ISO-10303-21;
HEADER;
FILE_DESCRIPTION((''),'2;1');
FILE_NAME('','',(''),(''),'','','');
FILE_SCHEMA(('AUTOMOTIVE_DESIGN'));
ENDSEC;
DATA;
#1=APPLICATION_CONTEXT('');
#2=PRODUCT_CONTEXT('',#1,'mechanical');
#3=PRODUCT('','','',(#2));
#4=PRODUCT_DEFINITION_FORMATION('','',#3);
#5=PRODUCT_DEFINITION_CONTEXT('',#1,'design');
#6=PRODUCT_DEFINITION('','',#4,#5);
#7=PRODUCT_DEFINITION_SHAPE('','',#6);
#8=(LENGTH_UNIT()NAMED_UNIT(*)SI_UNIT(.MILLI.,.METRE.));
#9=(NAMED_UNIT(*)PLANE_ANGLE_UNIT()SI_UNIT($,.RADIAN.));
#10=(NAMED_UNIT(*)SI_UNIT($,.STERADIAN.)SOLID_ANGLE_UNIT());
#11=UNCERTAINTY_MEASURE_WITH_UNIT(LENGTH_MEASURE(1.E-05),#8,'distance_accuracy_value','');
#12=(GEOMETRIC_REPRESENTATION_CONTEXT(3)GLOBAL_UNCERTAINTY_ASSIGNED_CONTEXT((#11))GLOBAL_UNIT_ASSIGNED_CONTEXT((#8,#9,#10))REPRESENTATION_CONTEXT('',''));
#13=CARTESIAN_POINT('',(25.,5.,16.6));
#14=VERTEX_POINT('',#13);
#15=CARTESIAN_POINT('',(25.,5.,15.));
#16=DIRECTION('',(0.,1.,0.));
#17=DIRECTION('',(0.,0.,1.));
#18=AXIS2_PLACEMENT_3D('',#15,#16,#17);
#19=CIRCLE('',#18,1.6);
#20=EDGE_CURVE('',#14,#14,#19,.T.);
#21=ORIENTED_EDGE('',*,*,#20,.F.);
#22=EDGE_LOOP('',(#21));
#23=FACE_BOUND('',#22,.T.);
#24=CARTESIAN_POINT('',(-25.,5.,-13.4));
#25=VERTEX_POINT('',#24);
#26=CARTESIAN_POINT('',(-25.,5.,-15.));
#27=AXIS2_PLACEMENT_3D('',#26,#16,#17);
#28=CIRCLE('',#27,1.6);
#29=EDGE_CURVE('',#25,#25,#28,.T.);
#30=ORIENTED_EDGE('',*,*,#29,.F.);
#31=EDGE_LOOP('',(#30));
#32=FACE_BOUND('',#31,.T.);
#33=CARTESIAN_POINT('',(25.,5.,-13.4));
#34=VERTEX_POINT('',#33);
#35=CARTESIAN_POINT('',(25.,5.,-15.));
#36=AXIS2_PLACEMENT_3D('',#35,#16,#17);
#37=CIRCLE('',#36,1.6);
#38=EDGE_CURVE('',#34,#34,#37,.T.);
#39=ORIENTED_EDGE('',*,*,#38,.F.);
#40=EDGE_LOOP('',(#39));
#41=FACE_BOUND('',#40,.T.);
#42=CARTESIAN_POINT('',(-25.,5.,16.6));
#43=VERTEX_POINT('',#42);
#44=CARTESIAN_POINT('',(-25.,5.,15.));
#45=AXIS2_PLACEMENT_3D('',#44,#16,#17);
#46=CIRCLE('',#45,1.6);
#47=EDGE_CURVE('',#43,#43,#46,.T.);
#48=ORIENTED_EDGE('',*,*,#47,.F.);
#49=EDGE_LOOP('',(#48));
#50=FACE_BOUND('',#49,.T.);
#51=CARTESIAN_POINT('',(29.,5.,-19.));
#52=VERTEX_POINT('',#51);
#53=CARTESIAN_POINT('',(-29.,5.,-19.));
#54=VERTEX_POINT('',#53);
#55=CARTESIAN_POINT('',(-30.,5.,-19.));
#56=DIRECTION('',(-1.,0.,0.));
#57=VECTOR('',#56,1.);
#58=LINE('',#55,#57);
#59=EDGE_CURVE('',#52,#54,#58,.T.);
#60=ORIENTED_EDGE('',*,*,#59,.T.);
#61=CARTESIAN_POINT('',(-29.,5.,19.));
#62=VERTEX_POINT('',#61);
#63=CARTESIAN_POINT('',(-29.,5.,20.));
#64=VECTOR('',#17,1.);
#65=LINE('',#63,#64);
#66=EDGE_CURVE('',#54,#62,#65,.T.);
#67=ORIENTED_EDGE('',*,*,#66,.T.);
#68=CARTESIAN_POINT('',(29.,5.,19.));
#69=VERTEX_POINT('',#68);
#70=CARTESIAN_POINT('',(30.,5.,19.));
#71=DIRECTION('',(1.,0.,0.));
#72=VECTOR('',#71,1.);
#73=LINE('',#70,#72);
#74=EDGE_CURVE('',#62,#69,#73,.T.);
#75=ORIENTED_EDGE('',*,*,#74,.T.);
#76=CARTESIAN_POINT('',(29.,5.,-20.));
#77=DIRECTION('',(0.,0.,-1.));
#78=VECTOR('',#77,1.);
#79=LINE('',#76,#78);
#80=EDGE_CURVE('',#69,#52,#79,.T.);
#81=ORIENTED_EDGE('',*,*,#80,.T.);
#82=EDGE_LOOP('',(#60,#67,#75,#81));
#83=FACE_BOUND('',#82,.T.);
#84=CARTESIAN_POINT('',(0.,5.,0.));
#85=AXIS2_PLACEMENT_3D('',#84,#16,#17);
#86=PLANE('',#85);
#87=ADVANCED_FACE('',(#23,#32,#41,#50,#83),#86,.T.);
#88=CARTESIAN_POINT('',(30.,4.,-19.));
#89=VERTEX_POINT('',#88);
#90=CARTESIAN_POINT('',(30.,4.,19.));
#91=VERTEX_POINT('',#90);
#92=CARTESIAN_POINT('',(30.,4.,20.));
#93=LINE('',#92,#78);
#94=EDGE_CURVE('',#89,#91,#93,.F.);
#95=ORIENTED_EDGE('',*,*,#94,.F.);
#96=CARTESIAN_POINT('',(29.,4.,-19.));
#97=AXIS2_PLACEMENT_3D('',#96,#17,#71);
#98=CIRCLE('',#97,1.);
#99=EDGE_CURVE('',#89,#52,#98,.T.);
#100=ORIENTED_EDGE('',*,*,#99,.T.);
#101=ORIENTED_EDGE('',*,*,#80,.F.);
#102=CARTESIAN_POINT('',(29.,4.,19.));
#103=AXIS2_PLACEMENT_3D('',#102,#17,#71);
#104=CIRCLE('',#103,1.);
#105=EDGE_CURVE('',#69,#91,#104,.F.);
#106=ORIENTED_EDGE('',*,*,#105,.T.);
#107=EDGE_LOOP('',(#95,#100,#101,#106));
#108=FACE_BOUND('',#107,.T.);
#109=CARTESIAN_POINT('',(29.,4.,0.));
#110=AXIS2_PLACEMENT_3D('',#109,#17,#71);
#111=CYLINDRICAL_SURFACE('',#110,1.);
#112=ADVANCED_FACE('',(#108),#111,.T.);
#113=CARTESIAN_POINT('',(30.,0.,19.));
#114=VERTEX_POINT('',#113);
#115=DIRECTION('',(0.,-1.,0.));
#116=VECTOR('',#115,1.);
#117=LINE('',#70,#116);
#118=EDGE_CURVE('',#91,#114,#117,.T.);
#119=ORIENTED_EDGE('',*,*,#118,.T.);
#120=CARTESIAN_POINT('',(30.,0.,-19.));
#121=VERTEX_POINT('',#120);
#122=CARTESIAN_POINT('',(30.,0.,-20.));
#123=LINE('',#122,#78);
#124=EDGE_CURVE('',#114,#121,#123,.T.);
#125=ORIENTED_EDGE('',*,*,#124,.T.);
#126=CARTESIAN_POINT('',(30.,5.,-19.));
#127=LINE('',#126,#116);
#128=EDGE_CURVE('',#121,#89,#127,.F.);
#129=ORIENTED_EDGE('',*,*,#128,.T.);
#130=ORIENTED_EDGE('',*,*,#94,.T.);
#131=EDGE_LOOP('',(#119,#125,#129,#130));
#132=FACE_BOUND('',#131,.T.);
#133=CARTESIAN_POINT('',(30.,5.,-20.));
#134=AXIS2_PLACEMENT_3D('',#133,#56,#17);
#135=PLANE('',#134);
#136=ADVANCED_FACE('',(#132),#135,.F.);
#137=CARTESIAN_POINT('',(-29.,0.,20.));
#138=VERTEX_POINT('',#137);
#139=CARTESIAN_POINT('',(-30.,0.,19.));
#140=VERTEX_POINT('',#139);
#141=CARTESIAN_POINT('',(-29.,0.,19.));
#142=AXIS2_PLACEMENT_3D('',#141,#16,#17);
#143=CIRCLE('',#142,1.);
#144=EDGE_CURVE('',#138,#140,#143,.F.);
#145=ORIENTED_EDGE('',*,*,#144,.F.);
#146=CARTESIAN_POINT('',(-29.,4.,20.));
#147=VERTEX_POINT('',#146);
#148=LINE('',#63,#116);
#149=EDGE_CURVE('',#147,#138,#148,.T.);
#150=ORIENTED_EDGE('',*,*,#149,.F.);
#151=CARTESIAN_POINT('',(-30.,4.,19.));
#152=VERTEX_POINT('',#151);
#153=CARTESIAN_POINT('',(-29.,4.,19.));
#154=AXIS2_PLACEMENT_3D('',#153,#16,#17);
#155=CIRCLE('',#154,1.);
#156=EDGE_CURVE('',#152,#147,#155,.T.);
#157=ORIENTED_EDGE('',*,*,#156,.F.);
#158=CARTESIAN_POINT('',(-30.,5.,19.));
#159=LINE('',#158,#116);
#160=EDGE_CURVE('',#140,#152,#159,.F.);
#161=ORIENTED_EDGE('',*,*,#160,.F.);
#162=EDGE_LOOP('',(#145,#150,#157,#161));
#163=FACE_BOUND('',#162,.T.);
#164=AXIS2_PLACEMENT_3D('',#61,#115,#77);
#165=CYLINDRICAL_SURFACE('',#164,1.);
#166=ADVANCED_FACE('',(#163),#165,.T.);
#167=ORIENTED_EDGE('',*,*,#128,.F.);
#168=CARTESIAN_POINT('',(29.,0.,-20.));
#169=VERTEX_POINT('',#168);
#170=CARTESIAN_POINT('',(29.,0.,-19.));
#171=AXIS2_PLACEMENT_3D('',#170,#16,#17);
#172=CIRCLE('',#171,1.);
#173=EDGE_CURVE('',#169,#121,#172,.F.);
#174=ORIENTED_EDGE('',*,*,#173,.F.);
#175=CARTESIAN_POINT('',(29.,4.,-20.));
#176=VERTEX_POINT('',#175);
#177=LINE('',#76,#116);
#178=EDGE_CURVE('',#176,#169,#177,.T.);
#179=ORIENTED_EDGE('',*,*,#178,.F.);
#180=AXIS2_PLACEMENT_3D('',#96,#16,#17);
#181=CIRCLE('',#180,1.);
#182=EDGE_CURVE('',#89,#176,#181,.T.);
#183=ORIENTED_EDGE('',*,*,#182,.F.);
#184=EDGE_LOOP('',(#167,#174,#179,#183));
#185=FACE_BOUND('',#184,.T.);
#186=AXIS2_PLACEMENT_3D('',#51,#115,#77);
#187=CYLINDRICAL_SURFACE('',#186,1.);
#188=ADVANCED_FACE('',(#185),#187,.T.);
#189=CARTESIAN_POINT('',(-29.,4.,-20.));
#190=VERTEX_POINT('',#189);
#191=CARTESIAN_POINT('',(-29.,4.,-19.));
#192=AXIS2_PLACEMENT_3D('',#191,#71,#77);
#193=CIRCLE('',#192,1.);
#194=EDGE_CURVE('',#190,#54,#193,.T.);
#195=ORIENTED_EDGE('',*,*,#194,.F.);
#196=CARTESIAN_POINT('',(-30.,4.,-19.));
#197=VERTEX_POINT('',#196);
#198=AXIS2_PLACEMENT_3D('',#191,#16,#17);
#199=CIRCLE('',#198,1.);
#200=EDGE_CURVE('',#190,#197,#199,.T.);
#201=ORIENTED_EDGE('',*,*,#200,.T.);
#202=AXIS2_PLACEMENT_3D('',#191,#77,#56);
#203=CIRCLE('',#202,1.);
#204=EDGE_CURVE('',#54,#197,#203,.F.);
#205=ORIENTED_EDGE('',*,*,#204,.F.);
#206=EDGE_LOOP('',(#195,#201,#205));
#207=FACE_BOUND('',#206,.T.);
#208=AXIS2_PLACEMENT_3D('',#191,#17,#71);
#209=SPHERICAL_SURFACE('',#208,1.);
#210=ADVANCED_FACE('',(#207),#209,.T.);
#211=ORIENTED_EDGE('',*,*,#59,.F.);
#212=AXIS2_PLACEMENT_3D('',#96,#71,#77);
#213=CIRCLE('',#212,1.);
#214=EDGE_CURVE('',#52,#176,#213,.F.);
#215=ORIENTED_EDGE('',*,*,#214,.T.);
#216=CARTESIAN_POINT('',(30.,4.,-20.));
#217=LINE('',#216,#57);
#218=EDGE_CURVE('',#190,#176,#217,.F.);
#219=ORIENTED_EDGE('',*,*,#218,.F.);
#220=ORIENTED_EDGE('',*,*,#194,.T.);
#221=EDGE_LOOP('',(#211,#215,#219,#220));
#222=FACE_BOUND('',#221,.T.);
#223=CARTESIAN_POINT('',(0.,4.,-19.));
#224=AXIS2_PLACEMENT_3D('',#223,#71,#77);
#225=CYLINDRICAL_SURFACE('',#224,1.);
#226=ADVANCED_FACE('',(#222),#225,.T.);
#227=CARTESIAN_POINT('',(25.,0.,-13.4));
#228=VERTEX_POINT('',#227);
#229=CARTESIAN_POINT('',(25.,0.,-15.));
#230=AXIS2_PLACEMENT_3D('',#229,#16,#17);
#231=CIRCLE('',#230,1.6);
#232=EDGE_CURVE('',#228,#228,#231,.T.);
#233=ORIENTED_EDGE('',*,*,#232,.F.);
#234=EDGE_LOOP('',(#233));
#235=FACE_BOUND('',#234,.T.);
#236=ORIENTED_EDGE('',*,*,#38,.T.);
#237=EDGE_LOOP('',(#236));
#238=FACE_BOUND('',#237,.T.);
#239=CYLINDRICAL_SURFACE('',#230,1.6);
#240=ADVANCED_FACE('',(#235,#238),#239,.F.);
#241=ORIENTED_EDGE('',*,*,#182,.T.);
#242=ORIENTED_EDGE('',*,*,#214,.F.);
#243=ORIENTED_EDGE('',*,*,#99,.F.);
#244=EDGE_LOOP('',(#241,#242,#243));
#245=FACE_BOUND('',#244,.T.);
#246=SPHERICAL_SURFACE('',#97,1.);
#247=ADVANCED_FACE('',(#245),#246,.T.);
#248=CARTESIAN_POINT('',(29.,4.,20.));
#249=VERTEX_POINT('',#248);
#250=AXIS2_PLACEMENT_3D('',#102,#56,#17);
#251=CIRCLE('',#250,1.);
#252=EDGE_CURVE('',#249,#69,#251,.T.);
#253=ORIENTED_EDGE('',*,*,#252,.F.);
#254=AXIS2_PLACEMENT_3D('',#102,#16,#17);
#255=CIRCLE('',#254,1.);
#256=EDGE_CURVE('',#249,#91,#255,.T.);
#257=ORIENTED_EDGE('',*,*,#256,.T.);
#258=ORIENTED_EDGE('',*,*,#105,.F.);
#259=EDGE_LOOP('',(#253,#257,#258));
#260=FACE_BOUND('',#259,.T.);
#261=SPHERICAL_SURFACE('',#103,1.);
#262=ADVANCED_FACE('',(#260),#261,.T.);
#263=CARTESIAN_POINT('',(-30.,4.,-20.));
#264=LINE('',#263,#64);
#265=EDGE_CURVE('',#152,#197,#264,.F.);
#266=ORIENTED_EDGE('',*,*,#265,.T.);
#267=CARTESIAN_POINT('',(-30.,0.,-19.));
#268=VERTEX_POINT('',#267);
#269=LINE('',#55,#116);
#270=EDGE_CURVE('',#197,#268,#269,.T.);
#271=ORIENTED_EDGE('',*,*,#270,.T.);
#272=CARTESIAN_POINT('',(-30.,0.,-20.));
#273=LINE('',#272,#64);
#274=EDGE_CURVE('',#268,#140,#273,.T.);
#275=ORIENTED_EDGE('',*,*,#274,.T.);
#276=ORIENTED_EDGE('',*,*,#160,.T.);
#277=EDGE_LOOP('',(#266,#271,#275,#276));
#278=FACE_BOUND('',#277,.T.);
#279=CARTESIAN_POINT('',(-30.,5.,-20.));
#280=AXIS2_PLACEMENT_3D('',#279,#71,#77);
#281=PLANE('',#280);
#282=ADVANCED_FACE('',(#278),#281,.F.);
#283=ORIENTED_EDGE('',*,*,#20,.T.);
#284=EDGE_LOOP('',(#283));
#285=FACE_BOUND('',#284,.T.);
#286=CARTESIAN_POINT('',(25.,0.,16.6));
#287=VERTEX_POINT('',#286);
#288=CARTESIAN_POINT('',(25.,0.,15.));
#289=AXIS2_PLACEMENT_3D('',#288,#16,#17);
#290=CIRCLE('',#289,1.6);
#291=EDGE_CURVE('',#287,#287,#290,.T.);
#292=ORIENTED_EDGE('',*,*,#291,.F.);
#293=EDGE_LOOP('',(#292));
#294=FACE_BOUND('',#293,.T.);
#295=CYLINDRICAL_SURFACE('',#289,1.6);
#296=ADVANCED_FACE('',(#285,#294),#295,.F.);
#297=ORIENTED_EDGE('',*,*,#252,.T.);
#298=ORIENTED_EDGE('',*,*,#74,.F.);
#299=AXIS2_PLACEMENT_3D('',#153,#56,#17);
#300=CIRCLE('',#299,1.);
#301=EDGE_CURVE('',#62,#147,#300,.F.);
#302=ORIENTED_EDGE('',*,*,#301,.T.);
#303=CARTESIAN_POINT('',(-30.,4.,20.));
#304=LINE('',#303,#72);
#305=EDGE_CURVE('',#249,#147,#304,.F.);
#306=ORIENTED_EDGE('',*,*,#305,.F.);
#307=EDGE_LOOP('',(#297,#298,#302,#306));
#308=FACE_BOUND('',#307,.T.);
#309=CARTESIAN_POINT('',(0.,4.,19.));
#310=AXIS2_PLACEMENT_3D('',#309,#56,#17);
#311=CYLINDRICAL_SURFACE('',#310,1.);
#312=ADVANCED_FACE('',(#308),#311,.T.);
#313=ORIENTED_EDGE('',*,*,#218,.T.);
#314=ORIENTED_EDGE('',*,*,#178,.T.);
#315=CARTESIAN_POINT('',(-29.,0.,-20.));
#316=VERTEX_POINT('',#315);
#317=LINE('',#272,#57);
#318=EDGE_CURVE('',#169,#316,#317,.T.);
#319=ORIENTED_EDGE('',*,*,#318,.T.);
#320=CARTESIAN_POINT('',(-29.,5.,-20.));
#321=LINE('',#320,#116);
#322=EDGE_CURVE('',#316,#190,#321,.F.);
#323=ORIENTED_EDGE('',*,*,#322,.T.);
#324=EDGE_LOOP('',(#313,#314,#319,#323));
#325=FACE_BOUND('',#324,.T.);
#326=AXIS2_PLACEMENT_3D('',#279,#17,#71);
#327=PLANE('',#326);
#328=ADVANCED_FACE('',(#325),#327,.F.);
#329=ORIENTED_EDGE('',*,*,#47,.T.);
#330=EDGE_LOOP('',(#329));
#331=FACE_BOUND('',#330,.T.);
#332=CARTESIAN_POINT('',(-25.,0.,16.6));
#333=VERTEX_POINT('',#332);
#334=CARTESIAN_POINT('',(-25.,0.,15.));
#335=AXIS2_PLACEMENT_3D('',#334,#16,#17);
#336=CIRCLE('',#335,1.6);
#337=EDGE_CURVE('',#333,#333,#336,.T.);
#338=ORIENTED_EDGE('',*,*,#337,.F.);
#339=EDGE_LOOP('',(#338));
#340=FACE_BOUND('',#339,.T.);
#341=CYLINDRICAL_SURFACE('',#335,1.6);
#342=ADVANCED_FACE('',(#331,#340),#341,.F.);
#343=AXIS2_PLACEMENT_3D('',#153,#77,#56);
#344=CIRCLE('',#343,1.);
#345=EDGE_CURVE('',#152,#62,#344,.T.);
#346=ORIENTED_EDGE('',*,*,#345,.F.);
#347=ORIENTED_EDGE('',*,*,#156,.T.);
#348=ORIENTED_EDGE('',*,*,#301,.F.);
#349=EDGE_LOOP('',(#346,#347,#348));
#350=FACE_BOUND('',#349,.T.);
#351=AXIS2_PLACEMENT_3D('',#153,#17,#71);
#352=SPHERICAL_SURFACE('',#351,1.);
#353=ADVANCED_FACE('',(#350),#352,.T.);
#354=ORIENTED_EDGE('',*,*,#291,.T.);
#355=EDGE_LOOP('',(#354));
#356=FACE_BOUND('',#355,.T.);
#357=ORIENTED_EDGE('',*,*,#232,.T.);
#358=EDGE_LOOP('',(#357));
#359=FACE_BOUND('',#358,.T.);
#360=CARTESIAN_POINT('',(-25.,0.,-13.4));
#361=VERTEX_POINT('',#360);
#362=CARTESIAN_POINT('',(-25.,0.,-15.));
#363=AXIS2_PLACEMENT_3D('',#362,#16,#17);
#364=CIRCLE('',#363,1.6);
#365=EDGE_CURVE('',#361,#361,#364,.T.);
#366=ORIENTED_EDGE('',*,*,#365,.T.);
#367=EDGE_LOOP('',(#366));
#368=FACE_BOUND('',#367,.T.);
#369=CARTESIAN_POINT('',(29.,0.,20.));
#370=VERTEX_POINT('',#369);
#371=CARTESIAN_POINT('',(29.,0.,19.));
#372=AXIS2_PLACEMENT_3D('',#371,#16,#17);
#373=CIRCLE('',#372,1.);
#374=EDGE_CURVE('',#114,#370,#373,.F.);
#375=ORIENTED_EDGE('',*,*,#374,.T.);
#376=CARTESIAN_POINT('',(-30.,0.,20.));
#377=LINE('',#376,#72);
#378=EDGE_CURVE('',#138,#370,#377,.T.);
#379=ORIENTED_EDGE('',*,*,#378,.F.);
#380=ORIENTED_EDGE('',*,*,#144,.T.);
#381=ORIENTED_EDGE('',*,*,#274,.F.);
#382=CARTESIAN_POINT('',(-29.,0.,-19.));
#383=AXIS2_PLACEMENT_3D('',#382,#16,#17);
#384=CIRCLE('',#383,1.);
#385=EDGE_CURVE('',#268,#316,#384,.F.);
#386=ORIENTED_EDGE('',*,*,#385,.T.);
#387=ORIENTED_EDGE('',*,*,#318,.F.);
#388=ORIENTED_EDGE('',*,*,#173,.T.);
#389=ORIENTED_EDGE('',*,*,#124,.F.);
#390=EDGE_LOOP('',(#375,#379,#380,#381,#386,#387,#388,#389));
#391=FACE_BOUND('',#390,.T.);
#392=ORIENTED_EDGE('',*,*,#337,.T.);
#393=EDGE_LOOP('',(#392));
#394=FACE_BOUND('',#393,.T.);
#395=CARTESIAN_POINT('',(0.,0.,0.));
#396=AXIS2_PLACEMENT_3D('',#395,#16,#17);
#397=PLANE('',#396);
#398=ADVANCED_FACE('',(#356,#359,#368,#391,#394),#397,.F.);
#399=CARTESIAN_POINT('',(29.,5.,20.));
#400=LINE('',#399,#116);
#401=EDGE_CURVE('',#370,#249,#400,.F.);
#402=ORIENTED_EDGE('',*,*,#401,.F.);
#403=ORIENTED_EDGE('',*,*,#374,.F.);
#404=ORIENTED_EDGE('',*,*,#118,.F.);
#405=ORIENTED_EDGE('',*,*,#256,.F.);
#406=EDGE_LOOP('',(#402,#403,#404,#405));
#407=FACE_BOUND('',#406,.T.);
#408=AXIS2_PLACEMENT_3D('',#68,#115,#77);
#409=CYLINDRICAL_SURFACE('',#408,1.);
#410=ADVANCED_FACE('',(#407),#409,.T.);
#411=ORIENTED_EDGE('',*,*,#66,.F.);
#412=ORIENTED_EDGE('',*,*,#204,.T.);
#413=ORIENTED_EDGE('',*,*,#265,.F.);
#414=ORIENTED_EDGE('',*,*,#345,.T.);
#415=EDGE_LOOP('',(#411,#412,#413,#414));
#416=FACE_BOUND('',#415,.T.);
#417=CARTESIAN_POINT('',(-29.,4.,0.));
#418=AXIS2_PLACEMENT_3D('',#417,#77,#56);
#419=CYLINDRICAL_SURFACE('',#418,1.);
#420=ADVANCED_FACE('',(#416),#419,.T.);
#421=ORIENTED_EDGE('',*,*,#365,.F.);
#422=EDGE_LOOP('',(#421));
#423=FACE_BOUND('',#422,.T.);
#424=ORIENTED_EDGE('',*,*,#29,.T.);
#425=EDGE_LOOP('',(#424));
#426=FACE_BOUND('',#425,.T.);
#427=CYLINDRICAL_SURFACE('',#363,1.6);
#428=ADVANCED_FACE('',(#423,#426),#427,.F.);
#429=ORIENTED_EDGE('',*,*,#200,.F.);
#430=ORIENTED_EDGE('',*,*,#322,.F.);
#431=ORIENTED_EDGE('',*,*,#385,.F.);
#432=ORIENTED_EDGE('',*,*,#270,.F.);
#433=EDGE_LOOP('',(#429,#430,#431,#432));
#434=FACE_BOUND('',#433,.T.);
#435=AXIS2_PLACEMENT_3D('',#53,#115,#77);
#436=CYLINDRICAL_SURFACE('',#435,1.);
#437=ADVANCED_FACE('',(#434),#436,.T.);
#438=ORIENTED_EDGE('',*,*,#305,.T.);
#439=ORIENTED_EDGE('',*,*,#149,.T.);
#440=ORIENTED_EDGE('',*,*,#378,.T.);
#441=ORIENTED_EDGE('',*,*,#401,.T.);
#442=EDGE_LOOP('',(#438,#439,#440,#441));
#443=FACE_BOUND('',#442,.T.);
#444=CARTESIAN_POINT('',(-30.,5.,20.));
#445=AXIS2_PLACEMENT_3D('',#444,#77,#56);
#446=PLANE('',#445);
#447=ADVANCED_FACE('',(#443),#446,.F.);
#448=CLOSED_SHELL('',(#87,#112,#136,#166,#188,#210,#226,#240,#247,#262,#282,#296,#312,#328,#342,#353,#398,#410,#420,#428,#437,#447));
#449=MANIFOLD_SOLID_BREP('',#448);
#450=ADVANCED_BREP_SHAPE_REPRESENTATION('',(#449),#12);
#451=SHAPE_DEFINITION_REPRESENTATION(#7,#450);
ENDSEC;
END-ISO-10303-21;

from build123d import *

# Parameters (mm, degrees)
SKETCH1_W           = 60
SKETCH1_H           = 40
BOSS_EXTRUDE1_DEPTH = 5
SKETCH2_R           = 1.6
CUT_EXTRUDE1_DEPTH  = 5
FILLET1_R           = 1
FILLET2_R           = 1


with BuildPart() as part:
    # Sketch1 → Boss-Extrude1 (new body)
    with BuildSketch(Plane(origin=(0, 0, 0), x_dir=(1, 0, 0), z_dir=(0, 1, 0))):
        Rectangle(SKETCH1_W, SKETCH1_H)
    extrude(amount=BOSS_EXTRUDE1_DEPTH)

    # Sketch2 → Cut-Extrude1 (cut)
    with BuildSketch(Plane(origin=(0, 5, 0), x_dir=(1, 0, 0), z_dir=(0, 1, 0))):
        with Locations(Location((-25, 15, 0), (0, 0, 270))):
            Circle(SKETCH2_R)
        with Locations(Location((25, -15, 0), (0, 0, 270))):
            Circle(SKETCH2_R)
        with Locations(Location((-25, -15, 0), (0, 0, 270))):
            Circle(SKETCH2_R)
        with Locations(Location((25, 15, 0), (0, 0, 270))):
            Circle(SKETCH2_R)
    extrude(amount=-CUT_EXTRUDE1_DEPTH, mode=Mode.SUBTRACT)

    # Fillet1
    fillet1_edges = [part.edges().sort_by_distance(p)[0] for p in [
        (-30, 5, 0),
        (0, 5, 20),
        (30, 5, 0),
        (0, 5, -20),
    ]]
    fillet(fillet1_edges, radius=FILLET1_R)

    # Fillet2
    # the kernel refuses this fillet: 1 mm, written as the material it takes off along each edge
    with BuildSketch(Plane(origin=(29, 4, -19), x_dir=(1, 0, 0), z_dir=(0, 0, -1))) as fillet2_piece_1_section:
        Polygon((0, 0), (FILLET2_R, 0), (FILLET2_R, -FILLET2_R), (0, -FILLET2_R), align=None)
    fillet2_piece_1 = extrude(amount=FILLET2_R, mode=Mode.PRIVATE)
    fillet2_piece_1 = fillet2_piece_1 - Plane(origin=(29, 4, -19), x_dir=(-0.7071067811865475, -0.7071067811865475, 0), z_dir=(0, 0, -1)) * Sphere(FILLET2_R, mode=Mode.PRIVATE)
    add(fillet2_piece_1, mode=Mode.SUBTRACT)
    with BuildSketch(Plane(origin=(29, 4, 19), x_dir=(0, 0, 1), z_dir=(1, 0, 0))) as fillet2_piece_2_section:
        Polygon((0, 0), (FILLET2_R, 0), (FILLET2_R, -FILLET2_R), (0, -FILLET2_R), align=None)
    fillet2_piece_2 = extrude(amount=FILLET2_R, mode=Mode.PRIVATE)
    fillet2_piece_2 = fillet2_piece_2 - Plane(origin=(29, 4, 19), x_dir=(0, -0.7071067811865475, -0.7071067811865475), z_dir=(1, 0, 0)) * Sphere(FILLET2_R, mode=Mode.PRIVATE)
    add(fillet2_piece_2, mode=Mode.SUBTRACT)
    with BuildSketch(Plane(origin=(-29, 4, -19), x_dir=(-1, 0, 0), z_dir=(0, 0, -1))) as fillet2_piece_3_section:
        Polygon((0, 0), (FILLET2_R, 0), (FILLET2_R, FILLET2_R), (0, FILLET2_R), align=None)
    fillet2_piece_3 = extrude(amount=FILLET2_R, mode=Mode.PRIVATE)
    fillet2_piece_3 = fillet2_piece_3 - Plane(origin=(-29, 4, -19), x_dir=(0.7071067811865475, -0.7071067811865475, 0), z_dir=(0, 0, -1)) * Sphere(FILLET2_R, mode=Mode.PRIVATE)
    add(fillet2_piece_3, mode=Mode.SUBTRACT)
    with BuildSketch(Plane(origin=(-29, 4, 19), x_dir=(0, 0, 1), z_dir=(-1, 0, 0))) as fillet2_piece_4_section:
        Polygon((0, 0), (FILLET2_R, 0), (FILLET2_R, FILLET2_R), (0, FILLET2_R), align=None)
    fillet2_piece_4 = extrude(amount=FILLET2_R, mode=Mode.PRIVATE)
    fillet2_piece_4 = fillet2_piece_4 - Plane(origin=(-29, 4, 19), x_dir=(0, -0.7071067811865475, -0.7071067811865475), z_dir=(-1, 0, 0)) * Sphere(FILLET2_R, mode=Mode.PRIVATE)
    add(fillet2_piece_4, mode=Mode.SUBTRACT)
    with BuildSketch(Plane(origin=(-30, -2.5, 20), x_dir=(0, 0, -1), z_dir=(0, 1, 0)), Plane(origin=(-30, -2.5, -20), x_dir=(1, 0, 0), z_dir=(0, 1, 0))) as fillet2_piece_5:
        with BuildLine():
            CenterArc((FILLET2_R, -FILLET2_R), FILLET2_R, 90, 90)
            Line((0, -FILLET2_R), (0, 0))
            Line((0, 0), (FILLET2_R, 0))
        make_face()
    extrude(amount=6.5, mode=Mode.SUBTRACT)
    with BuildSketch(Plane(origin=(30, -2.5, -20), x_dir=(-1, 0, 0), z_dir=(0, 1, 0)), Plane(origin=(30, -2.5, 20), x_dir=(0, 0, -1), z_dir=(0, 1, 0))) as fillet2_piece_6:
        with BuildLine():
            CenterArc((FILLET2_R, FILLET2_R), FILLET2_R, 180, 90)
            Line((0, FILLET2_R), (0, 0))
            Line((0, 0), (FILLET2_R, 0))
        make_face()
    extrude(amount=6.5, mode=Mode.SUBTRACT)


solid = part.part
